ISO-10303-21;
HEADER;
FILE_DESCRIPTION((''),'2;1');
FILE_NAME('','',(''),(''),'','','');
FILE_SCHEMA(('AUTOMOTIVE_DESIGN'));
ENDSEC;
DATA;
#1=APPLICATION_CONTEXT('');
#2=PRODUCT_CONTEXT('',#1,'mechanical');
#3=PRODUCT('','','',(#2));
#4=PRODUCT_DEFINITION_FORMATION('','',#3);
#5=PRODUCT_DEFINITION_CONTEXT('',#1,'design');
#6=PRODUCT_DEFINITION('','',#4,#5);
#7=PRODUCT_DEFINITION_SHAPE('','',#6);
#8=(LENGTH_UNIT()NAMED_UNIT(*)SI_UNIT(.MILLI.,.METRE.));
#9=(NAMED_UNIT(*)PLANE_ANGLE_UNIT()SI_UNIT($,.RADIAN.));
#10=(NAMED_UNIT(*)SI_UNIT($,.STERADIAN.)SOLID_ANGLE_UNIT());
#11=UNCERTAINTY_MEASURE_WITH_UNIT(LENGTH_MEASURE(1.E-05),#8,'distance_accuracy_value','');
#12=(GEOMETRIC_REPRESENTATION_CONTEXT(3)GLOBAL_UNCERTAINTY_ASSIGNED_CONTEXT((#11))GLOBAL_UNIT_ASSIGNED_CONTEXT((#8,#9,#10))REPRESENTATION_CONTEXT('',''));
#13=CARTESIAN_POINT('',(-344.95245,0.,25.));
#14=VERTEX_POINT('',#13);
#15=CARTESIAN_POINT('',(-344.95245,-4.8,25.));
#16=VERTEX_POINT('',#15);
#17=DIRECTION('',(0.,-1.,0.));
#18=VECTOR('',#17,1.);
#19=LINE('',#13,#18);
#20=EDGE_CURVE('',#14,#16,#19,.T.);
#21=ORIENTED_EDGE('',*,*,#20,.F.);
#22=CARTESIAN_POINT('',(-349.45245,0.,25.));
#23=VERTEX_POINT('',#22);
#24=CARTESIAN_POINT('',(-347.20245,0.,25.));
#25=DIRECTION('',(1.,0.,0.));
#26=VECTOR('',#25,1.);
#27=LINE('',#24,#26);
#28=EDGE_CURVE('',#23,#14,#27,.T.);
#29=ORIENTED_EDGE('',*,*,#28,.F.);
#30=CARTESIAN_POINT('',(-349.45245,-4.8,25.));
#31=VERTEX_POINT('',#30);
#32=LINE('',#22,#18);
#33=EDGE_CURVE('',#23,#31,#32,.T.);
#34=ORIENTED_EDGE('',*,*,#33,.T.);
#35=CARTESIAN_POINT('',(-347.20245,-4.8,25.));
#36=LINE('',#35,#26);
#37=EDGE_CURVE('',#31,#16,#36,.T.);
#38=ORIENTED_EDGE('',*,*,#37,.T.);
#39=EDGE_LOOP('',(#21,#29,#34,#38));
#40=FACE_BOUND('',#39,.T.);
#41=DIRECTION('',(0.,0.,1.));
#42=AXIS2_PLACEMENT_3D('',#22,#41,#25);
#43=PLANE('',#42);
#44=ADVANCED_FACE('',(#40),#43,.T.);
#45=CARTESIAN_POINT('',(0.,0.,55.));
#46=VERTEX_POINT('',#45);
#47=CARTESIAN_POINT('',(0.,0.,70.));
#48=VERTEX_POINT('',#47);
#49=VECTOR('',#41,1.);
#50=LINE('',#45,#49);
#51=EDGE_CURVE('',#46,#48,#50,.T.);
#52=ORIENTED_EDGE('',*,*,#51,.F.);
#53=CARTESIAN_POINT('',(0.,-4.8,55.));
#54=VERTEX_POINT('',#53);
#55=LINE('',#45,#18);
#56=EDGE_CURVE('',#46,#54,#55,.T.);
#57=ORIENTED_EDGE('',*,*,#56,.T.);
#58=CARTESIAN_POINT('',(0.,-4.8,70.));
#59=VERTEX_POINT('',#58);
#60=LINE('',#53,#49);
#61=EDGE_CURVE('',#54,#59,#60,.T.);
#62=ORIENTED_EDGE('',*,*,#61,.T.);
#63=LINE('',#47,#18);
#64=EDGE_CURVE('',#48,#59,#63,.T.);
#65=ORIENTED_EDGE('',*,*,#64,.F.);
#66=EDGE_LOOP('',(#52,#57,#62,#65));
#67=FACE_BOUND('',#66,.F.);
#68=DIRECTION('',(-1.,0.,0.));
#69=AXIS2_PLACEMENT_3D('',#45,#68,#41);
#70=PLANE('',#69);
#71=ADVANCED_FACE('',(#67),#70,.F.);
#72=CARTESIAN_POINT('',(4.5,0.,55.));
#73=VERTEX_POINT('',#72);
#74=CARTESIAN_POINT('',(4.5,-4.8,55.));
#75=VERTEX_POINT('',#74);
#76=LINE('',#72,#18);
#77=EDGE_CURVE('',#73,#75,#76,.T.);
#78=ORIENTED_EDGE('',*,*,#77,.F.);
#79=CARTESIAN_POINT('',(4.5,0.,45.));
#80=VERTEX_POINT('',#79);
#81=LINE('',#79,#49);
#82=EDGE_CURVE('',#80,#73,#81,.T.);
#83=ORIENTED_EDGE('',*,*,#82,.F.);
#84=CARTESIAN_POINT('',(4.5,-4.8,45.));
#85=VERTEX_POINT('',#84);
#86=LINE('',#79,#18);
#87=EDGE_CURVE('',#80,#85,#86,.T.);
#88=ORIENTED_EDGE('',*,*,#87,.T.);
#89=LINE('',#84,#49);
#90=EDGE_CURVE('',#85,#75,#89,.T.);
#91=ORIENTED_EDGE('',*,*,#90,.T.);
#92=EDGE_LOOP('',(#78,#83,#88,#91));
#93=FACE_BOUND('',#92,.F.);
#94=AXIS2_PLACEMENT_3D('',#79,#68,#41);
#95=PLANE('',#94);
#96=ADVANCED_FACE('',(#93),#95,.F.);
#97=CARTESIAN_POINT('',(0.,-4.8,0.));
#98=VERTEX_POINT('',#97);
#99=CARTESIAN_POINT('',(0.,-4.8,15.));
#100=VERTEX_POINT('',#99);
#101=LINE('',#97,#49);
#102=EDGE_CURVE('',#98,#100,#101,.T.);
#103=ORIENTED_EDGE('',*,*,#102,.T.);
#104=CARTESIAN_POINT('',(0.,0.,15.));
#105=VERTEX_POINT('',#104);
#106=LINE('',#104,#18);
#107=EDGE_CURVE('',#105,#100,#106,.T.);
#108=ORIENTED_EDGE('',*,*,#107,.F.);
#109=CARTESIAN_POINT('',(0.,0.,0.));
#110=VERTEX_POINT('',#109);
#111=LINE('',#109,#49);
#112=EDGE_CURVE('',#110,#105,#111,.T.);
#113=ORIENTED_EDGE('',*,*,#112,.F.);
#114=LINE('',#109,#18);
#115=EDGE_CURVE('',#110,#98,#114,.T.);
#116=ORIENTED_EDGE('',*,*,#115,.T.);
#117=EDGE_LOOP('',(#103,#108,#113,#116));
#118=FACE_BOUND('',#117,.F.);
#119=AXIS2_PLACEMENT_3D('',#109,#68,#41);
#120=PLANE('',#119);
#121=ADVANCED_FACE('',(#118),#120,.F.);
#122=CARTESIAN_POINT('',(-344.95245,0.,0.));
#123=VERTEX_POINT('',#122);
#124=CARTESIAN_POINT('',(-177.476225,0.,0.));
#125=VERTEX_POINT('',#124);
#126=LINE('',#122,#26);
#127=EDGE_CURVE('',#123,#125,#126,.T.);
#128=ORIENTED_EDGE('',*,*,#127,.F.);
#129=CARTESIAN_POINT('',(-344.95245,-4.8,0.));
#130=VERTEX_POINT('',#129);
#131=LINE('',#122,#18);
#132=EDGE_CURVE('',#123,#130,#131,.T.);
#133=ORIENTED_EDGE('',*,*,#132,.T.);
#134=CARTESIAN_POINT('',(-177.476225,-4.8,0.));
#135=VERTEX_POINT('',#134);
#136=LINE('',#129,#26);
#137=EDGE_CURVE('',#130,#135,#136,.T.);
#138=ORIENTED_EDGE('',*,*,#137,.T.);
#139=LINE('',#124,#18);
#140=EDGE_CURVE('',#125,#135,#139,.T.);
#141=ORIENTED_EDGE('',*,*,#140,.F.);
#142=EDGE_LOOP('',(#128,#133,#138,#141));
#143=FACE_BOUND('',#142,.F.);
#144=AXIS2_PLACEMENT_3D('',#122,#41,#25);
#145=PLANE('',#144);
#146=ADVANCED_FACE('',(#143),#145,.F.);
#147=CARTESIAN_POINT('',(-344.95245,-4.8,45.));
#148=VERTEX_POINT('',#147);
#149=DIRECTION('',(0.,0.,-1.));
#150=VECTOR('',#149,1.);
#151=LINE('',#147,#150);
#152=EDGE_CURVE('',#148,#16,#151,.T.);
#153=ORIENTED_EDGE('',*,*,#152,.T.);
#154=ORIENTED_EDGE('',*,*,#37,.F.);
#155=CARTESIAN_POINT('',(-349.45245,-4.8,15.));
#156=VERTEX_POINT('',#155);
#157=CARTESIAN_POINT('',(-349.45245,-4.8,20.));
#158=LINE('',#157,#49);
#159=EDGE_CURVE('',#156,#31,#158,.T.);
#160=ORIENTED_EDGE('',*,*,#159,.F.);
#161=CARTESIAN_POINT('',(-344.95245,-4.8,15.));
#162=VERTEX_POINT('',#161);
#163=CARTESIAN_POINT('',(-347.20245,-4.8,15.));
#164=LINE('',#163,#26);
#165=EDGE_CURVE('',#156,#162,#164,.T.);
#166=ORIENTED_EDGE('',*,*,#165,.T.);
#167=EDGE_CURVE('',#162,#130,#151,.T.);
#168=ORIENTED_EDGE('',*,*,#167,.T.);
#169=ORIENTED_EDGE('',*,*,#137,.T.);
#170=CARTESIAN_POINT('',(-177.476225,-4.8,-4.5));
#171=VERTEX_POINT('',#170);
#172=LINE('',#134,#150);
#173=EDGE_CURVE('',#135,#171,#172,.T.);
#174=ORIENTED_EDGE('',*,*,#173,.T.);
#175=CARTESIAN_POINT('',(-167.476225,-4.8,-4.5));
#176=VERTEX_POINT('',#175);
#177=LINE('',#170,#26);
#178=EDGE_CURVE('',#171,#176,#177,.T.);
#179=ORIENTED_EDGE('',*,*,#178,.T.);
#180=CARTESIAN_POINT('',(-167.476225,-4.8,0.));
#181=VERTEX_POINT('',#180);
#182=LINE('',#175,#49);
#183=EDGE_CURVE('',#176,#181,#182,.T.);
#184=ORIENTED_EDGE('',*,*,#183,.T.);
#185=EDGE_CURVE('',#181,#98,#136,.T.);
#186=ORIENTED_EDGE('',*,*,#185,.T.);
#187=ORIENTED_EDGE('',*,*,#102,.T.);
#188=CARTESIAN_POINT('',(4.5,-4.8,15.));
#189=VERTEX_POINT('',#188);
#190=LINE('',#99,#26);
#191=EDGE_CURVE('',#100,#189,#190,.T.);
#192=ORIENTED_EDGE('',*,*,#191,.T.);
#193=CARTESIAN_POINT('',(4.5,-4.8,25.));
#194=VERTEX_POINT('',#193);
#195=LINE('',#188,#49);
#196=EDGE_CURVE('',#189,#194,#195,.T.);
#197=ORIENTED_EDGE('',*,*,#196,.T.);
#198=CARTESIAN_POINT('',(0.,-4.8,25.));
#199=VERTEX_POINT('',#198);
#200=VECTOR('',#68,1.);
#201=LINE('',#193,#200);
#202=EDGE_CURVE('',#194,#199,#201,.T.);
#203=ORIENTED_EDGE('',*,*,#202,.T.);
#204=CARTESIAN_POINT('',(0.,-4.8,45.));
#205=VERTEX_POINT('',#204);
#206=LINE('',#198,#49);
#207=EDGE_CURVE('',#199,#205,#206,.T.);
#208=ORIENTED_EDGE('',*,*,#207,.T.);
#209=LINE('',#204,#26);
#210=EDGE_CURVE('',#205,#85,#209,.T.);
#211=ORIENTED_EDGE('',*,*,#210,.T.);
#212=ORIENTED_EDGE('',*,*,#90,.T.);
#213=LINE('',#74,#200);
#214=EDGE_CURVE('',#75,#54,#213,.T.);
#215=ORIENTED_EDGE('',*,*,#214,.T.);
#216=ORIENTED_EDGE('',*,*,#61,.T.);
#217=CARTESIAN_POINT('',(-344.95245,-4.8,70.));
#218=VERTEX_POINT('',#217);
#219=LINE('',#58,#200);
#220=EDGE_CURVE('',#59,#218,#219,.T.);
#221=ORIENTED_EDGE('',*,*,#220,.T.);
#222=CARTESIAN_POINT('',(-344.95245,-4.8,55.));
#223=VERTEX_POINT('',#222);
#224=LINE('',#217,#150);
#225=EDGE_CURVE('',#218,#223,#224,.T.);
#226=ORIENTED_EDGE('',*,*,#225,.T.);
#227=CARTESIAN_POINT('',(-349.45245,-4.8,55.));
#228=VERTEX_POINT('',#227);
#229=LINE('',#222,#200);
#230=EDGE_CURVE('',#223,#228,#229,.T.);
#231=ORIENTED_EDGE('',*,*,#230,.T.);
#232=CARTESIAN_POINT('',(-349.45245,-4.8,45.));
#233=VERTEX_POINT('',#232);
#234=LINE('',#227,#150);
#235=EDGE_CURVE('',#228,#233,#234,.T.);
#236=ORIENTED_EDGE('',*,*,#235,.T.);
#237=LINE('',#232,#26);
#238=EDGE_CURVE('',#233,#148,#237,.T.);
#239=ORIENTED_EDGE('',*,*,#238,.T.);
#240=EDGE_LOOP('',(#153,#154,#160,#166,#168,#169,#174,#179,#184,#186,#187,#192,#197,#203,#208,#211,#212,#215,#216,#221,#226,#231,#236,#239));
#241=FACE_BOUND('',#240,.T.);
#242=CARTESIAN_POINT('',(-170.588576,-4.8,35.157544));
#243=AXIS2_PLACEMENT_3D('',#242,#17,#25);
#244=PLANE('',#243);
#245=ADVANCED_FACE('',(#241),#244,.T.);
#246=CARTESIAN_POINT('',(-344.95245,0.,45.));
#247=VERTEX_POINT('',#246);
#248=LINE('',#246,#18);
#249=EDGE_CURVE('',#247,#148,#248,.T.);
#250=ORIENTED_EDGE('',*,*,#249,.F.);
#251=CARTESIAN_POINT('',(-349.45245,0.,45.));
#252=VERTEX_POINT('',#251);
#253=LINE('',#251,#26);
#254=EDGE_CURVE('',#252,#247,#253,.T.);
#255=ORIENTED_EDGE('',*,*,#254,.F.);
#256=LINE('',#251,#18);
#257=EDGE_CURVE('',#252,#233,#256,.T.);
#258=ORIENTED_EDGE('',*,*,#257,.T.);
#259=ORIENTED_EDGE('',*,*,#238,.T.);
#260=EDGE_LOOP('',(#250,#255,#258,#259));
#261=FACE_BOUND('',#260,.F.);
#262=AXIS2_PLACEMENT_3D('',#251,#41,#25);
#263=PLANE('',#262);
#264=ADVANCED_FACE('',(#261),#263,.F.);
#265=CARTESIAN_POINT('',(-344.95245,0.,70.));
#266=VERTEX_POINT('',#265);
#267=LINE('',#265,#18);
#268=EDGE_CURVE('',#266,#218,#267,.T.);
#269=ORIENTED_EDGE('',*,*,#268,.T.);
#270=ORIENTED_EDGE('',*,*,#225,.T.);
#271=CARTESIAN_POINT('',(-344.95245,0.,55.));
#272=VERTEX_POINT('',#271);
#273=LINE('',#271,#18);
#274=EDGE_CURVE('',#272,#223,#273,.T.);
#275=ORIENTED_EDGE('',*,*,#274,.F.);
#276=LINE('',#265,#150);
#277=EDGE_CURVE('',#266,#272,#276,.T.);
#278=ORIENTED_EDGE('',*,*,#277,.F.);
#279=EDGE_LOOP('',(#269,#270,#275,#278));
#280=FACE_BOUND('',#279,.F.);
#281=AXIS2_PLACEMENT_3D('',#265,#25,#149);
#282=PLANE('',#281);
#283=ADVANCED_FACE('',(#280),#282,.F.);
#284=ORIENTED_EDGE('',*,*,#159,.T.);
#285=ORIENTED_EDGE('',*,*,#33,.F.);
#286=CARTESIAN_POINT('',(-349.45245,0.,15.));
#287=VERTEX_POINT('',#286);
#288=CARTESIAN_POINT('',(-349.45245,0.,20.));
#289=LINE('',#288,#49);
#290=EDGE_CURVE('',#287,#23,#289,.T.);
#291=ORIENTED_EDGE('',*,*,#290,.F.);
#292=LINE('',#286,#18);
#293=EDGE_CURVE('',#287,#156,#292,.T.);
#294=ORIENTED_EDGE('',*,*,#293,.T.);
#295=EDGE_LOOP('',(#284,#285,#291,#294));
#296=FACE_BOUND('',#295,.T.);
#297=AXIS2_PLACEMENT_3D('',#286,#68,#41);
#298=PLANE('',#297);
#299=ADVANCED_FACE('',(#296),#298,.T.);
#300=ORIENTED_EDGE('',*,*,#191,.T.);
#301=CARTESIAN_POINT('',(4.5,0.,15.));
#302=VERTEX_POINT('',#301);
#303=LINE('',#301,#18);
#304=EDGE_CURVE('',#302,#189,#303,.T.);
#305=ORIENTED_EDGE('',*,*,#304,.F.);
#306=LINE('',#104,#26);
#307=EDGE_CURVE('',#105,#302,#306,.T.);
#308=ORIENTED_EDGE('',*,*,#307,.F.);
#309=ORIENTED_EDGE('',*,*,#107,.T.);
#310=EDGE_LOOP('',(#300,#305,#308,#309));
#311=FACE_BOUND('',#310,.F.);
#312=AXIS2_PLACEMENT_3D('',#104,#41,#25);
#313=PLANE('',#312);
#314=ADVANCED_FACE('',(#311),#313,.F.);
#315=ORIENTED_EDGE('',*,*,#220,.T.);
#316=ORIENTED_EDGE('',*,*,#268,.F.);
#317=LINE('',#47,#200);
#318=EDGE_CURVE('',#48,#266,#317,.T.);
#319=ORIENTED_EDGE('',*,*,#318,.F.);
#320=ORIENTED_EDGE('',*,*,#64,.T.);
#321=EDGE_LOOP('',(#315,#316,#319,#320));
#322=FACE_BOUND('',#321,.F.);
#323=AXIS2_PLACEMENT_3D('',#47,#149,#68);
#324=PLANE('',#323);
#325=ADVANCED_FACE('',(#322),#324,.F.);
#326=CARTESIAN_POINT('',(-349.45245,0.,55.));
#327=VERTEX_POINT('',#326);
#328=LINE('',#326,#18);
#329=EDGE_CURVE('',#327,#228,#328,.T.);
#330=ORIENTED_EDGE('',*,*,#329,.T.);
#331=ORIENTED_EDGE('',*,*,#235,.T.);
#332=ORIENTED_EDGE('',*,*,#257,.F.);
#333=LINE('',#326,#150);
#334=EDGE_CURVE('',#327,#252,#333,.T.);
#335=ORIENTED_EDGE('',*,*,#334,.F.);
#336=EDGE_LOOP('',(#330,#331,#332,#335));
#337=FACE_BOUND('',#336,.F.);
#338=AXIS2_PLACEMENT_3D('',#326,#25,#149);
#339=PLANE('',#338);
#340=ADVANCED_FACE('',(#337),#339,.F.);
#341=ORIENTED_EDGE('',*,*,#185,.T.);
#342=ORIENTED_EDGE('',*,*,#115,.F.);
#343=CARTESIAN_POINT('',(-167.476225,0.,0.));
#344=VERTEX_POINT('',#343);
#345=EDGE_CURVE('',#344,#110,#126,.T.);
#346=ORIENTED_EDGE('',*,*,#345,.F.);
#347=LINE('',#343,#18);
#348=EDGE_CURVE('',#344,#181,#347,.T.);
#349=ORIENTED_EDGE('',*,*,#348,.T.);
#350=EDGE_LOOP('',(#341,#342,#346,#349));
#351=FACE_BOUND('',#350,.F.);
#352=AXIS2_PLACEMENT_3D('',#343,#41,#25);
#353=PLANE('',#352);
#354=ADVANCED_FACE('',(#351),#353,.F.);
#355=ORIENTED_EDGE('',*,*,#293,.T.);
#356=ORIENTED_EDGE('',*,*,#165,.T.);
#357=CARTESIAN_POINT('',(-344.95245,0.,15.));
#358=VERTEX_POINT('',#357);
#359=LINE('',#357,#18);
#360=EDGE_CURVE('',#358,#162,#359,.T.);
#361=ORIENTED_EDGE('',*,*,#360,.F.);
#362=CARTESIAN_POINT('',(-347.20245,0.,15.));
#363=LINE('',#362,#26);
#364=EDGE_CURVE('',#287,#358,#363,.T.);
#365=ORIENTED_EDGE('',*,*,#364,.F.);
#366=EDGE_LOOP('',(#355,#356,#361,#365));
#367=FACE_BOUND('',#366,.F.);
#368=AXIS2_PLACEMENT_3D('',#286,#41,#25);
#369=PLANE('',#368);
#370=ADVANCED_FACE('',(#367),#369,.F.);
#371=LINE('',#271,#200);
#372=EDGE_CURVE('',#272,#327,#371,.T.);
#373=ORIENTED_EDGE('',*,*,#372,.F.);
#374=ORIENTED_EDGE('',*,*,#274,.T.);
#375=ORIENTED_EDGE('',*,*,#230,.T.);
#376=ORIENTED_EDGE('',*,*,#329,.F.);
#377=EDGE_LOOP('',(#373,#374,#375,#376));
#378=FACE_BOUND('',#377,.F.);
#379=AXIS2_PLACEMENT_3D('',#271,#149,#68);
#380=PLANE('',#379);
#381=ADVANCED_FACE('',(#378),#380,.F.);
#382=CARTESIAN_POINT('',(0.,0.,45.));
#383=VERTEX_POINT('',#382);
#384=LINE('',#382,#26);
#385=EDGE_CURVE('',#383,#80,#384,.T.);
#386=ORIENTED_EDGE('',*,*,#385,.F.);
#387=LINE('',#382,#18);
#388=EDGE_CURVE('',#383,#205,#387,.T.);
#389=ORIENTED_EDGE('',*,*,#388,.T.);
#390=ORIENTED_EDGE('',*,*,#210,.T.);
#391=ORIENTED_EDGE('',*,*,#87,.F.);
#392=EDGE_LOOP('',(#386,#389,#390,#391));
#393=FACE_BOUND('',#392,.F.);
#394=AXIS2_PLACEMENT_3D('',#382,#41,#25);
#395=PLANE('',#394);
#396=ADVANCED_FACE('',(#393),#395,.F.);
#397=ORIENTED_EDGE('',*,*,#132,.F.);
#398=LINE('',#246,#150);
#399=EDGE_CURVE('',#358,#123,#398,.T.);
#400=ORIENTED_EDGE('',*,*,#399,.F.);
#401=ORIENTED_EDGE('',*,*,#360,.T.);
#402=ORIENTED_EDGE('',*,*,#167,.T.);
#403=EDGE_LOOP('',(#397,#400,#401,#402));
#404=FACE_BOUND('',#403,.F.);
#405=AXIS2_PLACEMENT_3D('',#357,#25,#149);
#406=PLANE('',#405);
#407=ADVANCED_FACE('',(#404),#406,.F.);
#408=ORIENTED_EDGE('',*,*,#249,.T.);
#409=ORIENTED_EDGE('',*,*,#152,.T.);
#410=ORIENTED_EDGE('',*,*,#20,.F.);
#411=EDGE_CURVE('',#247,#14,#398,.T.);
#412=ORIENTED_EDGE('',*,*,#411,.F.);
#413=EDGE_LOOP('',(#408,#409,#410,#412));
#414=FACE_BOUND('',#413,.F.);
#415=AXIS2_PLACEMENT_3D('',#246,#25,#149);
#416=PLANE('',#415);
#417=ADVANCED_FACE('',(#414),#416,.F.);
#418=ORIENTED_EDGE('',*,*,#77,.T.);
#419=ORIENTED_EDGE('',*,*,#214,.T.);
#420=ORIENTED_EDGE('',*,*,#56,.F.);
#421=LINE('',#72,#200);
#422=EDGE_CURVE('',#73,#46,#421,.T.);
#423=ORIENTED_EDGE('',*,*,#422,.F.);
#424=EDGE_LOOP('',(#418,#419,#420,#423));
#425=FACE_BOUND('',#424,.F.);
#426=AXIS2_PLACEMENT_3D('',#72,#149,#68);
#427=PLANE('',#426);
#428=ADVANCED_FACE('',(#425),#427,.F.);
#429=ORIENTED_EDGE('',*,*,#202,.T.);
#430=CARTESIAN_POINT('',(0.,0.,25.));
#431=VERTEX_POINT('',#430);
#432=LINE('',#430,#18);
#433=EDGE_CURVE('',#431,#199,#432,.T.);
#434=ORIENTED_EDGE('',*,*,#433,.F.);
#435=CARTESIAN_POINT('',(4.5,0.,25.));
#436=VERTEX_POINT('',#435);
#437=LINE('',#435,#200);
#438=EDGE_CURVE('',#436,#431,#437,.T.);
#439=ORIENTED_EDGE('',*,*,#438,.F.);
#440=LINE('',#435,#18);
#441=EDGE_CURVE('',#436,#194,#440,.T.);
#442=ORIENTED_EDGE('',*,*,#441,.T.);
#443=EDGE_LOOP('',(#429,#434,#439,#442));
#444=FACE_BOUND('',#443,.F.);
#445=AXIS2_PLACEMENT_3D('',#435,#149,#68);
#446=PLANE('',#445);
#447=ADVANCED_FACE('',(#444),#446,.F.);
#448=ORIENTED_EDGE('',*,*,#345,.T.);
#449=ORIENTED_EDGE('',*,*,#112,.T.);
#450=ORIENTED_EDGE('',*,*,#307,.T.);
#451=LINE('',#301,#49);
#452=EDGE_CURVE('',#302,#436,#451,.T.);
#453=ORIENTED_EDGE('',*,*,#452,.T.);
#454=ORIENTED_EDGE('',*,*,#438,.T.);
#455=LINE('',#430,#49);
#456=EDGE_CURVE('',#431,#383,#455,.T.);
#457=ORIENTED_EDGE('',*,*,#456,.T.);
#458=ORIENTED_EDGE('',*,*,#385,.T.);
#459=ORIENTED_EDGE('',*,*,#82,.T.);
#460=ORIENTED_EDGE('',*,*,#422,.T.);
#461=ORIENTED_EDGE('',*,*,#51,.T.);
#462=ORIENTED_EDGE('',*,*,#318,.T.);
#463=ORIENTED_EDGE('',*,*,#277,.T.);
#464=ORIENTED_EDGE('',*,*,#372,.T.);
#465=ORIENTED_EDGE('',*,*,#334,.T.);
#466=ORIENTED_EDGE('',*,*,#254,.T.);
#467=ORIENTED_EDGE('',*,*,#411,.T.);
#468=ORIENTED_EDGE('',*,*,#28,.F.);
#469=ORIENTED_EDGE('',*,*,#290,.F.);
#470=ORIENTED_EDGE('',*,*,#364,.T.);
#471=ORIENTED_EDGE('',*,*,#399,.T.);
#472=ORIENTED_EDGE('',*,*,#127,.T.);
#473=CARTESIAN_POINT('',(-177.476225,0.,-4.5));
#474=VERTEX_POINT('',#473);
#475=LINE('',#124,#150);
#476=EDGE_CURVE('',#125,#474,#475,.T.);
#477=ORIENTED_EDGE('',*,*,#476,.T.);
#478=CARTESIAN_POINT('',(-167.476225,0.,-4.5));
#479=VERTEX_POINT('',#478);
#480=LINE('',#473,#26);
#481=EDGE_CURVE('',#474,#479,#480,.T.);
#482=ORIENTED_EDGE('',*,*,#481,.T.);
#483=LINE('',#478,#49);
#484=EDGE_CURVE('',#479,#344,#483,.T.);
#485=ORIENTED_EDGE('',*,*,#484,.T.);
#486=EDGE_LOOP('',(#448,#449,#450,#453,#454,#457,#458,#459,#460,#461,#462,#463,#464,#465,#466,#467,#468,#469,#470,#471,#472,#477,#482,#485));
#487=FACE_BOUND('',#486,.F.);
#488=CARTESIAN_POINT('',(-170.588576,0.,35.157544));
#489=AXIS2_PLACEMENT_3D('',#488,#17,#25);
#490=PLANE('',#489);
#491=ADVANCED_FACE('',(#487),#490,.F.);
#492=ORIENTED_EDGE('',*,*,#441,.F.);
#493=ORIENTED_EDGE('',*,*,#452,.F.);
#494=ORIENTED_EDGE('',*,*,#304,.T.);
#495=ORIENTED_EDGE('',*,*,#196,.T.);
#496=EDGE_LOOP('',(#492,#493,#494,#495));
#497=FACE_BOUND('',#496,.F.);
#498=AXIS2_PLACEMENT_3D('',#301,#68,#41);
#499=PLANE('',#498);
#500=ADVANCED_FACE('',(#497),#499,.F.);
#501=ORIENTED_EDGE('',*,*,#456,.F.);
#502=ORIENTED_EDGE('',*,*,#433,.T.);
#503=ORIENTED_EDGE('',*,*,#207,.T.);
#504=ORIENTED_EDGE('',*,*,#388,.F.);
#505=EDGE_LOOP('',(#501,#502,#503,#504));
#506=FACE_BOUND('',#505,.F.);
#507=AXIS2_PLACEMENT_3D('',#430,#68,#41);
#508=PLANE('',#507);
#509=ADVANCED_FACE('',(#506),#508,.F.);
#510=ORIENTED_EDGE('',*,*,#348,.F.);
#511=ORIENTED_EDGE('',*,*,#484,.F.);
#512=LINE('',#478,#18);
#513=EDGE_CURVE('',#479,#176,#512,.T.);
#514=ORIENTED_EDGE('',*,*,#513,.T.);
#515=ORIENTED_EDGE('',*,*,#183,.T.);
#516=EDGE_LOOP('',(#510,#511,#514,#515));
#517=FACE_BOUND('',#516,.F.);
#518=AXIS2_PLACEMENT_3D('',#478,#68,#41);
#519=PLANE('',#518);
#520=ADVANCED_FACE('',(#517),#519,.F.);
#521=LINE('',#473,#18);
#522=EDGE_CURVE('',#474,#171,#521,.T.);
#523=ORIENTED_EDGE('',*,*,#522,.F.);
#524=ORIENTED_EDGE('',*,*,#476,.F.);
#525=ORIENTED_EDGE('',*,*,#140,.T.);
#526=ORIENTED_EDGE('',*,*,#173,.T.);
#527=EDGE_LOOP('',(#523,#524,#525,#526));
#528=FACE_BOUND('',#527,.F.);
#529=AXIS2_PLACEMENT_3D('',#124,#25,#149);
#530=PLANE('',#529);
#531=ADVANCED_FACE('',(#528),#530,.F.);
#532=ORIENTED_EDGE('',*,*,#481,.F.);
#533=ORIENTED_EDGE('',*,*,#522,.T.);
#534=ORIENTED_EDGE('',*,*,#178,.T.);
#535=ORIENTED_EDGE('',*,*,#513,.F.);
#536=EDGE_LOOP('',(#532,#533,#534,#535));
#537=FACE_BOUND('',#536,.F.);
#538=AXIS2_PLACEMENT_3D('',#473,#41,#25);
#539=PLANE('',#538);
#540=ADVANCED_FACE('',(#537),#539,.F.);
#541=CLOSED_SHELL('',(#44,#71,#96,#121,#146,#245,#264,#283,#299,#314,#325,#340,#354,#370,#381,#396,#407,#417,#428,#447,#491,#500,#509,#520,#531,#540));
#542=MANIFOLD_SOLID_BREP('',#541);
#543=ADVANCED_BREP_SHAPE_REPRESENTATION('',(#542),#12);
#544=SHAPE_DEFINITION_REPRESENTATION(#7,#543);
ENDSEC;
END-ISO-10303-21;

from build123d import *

# Parameters (mm, degrees)
F0_W     = 4.5
F0_H     = 10
F1_DEPTH = 4.8


# Not quite as in the source:
# - a feature names something its author has since deleted; it is built from what else it names


with BuildPart() as f1:
    # F0 (on Front) → F1 (new body)
    with BuildSketch(Plane.XZ):
        Polygon((-167.476225, 0), (0, 0), (0, 15), (4.5, 15), (4.5, 25), (0, 25), (0, 45), (4.5, 45), (4.5, 55), (0, 55), (0, 70), (-172.276225, 70), (-182.276225, 70), (-344.95245, 70), (-344.95245, 55), (-349.45245, 55), (-349.45245, 45), (-344.95245, 45), (-344.95245, 25), (-344.95245, 15), (-344.95245, 0), (-177.476225, 0), align=None)
        Polygon((-167.476225, -0.2312080078), (-167.476225, 0), (-177.476225, 0), (-177.476225, -4.5), (-167.476225, -4.5), align=None)
        with Locations((-347.20245, 20)):
            Rectangle(F0_W, F0_H)
    extrude(amount=F1_DEPTH)


solid = f1.part
